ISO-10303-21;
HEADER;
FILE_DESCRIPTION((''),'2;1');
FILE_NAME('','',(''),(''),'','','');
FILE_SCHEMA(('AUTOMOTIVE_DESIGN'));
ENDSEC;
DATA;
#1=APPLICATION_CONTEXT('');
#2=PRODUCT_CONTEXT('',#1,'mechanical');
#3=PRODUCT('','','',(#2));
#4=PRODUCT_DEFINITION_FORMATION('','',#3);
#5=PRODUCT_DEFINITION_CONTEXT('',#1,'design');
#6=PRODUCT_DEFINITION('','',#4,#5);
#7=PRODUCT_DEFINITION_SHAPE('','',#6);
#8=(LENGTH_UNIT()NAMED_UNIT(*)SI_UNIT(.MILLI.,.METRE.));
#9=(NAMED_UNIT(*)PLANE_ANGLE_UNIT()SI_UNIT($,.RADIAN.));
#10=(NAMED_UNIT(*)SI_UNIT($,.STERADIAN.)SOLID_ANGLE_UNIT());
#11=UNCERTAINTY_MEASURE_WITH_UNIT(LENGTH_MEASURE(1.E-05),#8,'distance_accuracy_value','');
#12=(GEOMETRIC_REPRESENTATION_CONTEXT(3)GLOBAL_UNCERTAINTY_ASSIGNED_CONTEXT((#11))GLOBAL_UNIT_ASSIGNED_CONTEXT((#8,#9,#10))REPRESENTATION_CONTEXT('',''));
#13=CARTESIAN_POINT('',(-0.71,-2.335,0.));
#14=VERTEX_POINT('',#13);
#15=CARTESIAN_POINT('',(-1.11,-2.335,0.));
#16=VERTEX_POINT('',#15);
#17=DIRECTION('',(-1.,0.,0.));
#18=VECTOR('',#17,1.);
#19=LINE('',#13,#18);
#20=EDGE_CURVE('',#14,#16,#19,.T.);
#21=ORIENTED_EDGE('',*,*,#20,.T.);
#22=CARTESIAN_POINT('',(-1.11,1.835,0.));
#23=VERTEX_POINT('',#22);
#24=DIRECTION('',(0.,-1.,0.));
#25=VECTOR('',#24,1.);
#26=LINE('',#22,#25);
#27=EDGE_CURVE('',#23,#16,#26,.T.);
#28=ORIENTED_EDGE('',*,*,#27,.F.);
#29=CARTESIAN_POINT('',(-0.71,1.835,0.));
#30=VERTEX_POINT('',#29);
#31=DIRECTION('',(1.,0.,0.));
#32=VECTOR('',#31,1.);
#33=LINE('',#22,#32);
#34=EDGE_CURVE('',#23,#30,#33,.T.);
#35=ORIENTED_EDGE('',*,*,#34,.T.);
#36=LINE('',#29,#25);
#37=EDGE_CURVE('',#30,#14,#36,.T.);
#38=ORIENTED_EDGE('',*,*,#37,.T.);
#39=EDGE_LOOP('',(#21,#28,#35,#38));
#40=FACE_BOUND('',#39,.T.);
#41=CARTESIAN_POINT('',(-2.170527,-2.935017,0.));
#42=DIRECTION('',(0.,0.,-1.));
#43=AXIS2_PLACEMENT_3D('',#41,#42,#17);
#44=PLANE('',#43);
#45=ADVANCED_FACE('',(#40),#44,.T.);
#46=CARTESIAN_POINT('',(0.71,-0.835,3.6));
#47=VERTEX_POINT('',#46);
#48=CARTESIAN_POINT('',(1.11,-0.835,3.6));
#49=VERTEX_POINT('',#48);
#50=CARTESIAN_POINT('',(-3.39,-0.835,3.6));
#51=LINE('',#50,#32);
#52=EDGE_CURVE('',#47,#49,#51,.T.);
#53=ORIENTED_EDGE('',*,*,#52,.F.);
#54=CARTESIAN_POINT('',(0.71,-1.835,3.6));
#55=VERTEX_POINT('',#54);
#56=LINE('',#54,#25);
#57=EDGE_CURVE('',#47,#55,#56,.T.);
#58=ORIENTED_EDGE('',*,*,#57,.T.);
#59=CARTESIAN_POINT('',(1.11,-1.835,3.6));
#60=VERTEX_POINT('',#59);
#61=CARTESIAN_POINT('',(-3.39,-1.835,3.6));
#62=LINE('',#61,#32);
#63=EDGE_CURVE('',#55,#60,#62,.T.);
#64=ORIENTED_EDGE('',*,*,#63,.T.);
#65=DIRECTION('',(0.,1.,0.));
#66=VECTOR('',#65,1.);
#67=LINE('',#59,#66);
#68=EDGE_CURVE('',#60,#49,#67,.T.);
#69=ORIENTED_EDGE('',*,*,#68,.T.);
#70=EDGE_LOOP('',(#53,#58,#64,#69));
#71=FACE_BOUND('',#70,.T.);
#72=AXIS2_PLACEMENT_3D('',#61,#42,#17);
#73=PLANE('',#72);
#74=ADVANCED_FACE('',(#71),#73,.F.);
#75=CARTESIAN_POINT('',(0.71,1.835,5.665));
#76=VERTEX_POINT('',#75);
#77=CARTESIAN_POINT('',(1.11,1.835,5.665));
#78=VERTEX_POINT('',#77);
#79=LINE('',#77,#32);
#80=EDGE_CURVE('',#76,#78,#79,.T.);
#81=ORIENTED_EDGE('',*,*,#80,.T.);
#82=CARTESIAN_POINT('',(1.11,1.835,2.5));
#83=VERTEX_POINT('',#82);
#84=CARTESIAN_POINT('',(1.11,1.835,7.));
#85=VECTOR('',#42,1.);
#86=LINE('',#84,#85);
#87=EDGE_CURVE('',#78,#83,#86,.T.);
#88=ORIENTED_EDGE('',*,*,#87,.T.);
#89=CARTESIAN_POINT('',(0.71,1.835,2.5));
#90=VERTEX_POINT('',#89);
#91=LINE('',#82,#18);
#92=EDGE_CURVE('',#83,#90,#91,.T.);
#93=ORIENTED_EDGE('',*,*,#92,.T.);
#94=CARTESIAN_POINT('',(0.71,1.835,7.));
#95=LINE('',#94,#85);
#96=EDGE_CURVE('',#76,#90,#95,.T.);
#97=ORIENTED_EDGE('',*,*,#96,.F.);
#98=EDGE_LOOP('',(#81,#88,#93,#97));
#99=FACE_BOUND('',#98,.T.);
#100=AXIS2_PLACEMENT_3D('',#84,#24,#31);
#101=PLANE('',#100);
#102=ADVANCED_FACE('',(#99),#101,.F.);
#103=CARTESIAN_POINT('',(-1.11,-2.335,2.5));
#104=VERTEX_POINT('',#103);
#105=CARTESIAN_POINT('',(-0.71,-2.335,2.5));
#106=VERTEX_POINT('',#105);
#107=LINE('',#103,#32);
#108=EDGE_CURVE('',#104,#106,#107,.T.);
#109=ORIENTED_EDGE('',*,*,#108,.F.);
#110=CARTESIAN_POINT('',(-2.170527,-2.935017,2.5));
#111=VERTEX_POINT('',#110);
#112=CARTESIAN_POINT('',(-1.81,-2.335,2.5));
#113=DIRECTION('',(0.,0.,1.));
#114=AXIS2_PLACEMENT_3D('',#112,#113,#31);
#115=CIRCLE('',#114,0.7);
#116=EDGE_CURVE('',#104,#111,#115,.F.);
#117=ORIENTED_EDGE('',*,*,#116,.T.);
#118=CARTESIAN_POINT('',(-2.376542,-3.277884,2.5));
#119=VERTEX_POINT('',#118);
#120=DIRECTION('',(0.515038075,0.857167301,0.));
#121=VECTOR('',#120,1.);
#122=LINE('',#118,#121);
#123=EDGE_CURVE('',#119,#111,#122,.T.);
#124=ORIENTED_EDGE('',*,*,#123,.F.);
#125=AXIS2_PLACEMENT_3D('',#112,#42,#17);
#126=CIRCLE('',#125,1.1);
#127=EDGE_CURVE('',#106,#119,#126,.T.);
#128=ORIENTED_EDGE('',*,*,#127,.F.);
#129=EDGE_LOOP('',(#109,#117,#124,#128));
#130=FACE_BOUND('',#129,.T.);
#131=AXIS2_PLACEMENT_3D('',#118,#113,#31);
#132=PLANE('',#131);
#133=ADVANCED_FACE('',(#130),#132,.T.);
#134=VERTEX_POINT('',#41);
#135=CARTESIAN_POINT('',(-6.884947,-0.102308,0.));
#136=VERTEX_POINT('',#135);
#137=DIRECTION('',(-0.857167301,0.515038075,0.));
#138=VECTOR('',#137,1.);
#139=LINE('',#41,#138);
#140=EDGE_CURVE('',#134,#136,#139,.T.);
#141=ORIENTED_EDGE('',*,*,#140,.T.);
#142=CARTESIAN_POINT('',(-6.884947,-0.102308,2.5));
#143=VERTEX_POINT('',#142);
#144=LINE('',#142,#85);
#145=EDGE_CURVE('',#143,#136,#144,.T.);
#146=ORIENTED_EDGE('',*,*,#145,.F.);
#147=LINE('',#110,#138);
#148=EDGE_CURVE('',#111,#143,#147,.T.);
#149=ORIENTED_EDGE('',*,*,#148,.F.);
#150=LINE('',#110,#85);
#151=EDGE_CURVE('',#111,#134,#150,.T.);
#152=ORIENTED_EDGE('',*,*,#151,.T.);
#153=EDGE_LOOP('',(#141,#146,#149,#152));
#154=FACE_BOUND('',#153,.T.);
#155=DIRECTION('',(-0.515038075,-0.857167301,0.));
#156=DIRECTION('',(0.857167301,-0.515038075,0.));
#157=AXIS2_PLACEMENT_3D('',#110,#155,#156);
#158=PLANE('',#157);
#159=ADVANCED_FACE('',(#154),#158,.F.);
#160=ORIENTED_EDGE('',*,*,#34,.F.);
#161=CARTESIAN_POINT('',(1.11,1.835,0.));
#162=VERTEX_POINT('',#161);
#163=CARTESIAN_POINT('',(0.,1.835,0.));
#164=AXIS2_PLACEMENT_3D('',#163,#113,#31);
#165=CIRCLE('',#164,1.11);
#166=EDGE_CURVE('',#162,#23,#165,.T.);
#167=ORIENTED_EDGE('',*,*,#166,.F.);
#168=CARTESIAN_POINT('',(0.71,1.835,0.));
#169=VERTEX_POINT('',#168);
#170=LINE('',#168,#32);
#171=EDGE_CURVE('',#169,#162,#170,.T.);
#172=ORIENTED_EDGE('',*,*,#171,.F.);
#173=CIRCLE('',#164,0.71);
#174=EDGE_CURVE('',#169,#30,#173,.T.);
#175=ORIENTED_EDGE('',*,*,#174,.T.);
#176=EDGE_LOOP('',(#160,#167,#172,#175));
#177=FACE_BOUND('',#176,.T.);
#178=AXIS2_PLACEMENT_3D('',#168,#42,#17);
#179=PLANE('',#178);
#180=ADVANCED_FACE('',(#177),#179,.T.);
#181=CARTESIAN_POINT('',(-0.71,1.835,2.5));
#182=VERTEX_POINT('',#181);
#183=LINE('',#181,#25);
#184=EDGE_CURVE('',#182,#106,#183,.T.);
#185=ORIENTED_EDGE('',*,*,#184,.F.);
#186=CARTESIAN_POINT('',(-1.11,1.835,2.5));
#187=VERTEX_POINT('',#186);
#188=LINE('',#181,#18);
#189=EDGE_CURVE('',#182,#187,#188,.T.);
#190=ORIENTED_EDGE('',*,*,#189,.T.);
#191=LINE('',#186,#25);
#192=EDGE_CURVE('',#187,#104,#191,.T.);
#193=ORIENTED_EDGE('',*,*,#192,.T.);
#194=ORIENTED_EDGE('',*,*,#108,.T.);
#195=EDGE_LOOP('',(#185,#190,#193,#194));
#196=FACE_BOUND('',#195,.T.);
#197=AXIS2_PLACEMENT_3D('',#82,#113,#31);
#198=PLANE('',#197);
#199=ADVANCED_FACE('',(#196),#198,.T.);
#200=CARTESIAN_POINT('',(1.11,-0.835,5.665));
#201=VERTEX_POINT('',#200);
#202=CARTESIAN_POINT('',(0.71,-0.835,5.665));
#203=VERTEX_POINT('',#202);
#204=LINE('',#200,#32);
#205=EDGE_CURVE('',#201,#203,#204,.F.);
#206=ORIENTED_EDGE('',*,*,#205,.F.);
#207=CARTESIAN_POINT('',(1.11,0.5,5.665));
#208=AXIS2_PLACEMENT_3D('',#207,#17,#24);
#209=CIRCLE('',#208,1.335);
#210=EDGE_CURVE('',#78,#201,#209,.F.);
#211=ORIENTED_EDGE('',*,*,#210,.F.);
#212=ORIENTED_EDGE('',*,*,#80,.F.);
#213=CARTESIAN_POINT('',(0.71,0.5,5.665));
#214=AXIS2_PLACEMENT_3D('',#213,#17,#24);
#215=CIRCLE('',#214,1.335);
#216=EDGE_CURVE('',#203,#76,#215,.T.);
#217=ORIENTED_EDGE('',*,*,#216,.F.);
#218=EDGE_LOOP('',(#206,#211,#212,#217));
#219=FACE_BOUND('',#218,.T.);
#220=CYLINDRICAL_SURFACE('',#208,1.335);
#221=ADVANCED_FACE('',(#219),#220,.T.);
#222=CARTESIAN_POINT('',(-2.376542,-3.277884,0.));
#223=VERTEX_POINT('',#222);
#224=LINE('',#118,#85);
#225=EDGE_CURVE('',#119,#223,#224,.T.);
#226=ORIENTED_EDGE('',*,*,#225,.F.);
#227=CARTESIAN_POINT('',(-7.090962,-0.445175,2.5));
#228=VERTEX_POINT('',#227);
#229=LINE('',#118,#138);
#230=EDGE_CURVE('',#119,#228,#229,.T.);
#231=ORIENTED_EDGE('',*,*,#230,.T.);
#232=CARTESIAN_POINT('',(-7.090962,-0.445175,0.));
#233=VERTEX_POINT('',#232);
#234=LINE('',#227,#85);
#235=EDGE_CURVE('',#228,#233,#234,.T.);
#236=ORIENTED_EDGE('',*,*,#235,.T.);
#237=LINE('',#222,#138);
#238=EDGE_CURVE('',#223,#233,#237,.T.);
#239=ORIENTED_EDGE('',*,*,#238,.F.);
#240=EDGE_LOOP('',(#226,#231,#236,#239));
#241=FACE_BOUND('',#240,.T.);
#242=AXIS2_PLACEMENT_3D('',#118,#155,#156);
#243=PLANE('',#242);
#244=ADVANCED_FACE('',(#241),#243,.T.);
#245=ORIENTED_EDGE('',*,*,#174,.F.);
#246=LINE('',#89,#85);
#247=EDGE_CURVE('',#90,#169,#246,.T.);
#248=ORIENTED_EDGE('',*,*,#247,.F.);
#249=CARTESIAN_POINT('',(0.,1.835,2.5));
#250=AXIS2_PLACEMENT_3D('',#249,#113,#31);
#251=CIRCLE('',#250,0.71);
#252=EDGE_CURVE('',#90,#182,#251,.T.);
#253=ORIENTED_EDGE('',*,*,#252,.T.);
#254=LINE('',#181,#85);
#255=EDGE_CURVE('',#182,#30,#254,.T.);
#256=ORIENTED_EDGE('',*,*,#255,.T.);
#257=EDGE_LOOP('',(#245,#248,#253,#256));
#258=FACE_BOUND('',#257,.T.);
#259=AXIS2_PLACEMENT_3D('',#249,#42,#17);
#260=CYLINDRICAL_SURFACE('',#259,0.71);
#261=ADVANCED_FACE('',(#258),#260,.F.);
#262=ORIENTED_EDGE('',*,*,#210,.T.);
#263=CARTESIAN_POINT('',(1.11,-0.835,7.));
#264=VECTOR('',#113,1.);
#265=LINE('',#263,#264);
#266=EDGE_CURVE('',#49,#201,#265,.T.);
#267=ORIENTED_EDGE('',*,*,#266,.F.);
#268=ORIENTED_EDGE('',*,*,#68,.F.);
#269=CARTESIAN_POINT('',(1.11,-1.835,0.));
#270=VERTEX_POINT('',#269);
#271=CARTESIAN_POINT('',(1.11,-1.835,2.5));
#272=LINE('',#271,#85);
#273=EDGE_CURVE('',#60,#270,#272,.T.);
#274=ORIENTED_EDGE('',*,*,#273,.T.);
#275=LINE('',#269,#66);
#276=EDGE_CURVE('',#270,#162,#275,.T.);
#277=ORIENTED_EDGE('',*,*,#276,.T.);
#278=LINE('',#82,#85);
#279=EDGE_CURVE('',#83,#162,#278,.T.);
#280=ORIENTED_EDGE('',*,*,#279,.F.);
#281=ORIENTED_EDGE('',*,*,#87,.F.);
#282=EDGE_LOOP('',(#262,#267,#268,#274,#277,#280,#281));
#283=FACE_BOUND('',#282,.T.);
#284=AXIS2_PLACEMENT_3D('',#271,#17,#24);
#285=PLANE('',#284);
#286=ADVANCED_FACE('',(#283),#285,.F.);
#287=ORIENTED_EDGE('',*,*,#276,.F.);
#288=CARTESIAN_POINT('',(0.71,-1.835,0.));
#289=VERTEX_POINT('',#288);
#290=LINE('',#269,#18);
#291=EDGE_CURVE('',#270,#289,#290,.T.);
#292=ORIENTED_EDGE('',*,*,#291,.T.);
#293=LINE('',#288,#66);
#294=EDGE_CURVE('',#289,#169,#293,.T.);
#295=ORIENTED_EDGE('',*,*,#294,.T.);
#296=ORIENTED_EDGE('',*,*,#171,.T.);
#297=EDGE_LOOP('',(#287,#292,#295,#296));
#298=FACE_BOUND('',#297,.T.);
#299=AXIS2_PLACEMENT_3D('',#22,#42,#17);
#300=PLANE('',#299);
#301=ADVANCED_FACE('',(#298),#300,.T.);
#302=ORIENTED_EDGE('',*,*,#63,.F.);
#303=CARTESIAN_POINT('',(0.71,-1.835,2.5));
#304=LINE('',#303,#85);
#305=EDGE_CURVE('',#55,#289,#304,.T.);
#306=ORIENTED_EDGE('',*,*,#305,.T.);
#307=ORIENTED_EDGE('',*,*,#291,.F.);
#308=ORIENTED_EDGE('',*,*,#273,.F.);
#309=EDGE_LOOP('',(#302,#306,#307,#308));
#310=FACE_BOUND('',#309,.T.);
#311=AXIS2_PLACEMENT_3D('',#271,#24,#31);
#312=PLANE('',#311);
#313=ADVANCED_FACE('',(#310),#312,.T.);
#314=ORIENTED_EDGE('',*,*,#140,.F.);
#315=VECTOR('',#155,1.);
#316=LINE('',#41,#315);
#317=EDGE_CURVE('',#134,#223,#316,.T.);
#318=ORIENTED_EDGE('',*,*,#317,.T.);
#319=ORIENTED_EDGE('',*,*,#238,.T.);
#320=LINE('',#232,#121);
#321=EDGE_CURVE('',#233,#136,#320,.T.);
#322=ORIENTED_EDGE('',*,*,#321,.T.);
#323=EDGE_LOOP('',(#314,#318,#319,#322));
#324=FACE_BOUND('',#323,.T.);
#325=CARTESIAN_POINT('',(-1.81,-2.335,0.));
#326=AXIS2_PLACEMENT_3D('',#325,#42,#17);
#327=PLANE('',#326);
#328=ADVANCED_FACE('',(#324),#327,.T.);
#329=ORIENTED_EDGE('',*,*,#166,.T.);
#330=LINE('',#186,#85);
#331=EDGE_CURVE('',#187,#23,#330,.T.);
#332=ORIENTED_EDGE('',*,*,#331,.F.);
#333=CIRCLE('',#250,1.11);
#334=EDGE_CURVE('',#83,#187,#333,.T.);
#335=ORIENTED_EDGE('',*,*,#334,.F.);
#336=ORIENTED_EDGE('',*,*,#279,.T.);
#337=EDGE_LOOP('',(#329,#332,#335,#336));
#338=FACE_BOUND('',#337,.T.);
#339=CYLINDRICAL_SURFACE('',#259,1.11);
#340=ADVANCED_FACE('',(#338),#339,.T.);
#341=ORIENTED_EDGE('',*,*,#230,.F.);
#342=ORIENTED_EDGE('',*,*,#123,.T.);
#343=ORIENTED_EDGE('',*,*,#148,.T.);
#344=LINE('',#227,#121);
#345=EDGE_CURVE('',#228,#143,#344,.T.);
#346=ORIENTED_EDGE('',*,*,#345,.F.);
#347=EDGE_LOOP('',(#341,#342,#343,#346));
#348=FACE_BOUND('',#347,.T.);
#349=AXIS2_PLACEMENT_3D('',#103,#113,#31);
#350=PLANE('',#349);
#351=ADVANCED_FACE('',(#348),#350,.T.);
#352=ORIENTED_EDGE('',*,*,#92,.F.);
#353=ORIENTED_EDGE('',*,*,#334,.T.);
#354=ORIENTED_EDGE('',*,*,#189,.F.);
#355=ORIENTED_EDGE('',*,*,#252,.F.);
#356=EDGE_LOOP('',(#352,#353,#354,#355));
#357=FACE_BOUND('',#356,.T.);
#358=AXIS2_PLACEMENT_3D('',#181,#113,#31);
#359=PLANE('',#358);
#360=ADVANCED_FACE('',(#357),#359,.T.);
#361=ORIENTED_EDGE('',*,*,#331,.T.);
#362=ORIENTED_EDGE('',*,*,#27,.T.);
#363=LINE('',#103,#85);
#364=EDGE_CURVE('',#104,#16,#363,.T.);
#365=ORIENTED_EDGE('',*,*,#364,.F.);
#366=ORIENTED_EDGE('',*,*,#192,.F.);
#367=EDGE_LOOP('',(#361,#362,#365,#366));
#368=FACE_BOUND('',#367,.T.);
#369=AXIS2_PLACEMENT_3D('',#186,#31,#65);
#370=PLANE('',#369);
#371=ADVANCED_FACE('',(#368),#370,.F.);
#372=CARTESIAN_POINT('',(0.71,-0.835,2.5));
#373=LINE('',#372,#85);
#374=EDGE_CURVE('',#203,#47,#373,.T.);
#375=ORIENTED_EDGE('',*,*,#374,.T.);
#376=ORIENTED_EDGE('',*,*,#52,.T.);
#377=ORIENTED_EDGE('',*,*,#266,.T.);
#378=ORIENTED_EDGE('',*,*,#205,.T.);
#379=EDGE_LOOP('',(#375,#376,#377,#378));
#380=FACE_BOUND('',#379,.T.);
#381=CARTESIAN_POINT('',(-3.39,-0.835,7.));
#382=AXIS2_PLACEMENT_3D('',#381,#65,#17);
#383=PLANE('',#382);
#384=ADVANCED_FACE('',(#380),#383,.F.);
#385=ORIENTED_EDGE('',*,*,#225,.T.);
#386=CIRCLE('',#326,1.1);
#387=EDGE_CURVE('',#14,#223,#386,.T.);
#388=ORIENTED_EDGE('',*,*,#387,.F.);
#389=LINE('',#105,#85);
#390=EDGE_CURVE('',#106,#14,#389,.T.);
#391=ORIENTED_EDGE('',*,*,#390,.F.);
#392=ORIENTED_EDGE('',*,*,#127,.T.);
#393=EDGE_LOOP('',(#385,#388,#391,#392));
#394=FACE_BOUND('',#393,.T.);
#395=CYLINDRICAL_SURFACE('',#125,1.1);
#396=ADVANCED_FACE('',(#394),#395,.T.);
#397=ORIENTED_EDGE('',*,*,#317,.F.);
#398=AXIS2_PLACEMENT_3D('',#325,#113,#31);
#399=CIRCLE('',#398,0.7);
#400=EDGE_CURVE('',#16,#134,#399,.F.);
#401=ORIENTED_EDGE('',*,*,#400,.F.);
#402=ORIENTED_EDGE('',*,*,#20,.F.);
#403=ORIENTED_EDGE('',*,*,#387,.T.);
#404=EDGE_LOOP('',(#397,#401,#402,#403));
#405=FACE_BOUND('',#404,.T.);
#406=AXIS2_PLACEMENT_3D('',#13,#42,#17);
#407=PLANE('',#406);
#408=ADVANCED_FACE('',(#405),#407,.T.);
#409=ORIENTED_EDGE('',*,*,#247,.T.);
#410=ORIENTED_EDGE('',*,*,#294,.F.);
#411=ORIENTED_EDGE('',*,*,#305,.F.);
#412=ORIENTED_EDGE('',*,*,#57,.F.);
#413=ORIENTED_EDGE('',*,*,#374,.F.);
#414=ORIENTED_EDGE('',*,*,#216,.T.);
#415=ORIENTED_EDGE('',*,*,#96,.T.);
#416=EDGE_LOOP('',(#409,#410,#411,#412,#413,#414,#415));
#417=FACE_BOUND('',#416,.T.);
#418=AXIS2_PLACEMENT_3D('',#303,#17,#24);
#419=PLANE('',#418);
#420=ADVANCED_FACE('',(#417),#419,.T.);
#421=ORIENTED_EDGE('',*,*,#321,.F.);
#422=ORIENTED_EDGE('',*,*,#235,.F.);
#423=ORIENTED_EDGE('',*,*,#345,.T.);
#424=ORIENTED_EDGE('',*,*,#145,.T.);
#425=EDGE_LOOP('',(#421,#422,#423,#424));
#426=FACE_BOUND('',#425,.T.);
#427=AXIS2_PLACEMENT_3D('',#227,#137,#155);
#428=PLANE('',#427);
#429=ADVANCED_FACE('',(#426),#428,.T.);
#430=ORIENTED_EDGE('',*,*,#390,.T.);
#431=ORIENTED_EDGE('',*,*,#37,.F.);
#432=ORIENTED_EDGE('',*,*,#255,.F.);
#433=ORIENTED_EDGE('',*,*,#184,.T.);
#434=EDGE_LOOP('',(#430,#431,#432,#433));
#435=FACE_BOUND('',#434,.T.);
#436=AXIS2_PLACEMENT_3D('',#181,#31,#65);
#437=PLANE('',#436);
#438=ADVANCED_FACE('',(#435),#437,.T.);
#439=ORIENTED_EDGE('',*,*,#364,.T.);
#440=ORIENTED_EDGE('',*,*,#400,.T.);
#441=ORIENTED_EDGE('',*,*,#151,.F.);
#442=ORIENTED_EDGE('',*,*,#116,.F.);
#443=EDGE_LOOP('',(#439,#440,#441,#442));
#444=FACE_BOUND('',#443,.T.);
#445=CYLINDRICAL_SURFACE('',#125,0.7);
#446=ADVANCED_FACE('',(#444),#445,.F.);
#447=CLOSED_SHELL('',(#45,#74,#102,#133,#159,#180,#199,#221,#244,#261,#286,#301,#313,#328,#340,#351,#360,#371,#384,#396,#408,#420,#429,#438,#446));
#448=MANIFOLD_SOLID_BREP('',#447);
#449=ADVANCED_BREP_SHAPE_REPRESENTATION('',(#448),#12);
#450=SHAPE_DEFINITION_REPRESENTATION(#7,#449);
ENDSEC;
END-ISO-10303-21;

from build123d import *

# Parameters (mm, degrees)
BASE_FLANGE1_DEPTH  = 2.5
SKETCH3_W           = 0.4
SKETCH3_H           = 3.67
BOSS_EXTRUDE1_DEPTH = 4.5
SKETCH5_W           = 3.4
SKETCH5_H           = 1
CUT_EXTRUDE1_DEPTH  = 4.5
FILLET1_RADIUS      = 1.335
FILLET1_LENGTH      = 0.4


# Sheet-metal steps are written as plain solids
with BuildPart() as part:
    # Sketch2 → Base-Flange1 (new body)
    with BuildSketch(Plane.XY):
        with BuildLine():
            Line((0.71, -1.835), (0.71, 1.835))
            ThreePointArc((0.71, 1.835), (0, 2.545), (-0.71, 1.835))
            Line((-0.71, 1.835), (-0.71, -2.335))
            ThreePointArc((-0.71, -2.335), (-1.268334084, -3.292391266), (-2.376541882, -3.277884031))
            Line((-2.376541882, -3.277884031), (-7.090962036, -0.445174619))
            Line((-7.090962036, -0.445174619), (-6.884946806, -0.102307698))
            Line((-6.884946806, -0.102307698), (-2.170526652, -2.93501711))
            ThreePointArc((-2.170526652, -2.93501711), (-1.465303508, -2.944248987), (-1.11, -2.335))
            Line((-1.11, -2.335), (-1.11, 1.835))
            ThreePointArc((-1.11, 1.835), (0, 2.945), (1.11, 1.835))
            Line((1.11, 1.835), (1.11, -1.835))
            Line((1.11, -1.835), (0.71, -1.835))
        make_face()
    extrude(amount=BASE_FLANGE1_DEPTH)

    # Sketch3 → Boss-Extrude1 (add)
    with BuildSketch(Plane.XY.offset(2.5)):
        with Locations((0.91, 0)):
            Rectangle(SKETCH3_W, SKETCH3_H)
    extrude(amount=BOSS_EXTRUDE1_DEPTH)

    # Sketch5 → Cut-Extrude1 (cut)
    with BuildSketch(Plane(origin=(1.11, 0, 0), x_dir=(0, 0, -1), z_dir=(1, 0, 0))):
        with Locations((-5.3, -1.335)):
            Rectangle(SKETCH5_W, SKETCH5_H)
    extrude(amount=-CUT_EXTRUDE1_DEPTH, mode=Mode.SUBTRACT)

    # Fillet1: full round fillet: the end face becomes a half cylinder, R = half its width
    fillet1_face = Plane((0.91, 0.5, 7), x_dir=(-1, 0, 0), z_dir=(0, 0, 1))  # on the end face: x along it, z out of the body
    fillet1_slab = fillet1_face.offset(-FILLET1_RADIUS / 2) * Box(FILLET1_LENGTH, 2 * FILLET1_RADIUS, FILLET1_RADIUS, mode=Mode.PRIVATE)  # the body's end, R deep
    fillet1_round = Plane((0.91, 0.5, 5.665), x_dir=(0, 0, 1), z_dir=(-1, 0, 0)) * Cylinder(FILLET1_RADIUS, FILLET1_LENGTH, mode=Mode.PRIVATE)  # its axis R under the face
    add(fillet1_slab - fillet1_round, mode=Mode.SUBTRACT)


solid = part.part
